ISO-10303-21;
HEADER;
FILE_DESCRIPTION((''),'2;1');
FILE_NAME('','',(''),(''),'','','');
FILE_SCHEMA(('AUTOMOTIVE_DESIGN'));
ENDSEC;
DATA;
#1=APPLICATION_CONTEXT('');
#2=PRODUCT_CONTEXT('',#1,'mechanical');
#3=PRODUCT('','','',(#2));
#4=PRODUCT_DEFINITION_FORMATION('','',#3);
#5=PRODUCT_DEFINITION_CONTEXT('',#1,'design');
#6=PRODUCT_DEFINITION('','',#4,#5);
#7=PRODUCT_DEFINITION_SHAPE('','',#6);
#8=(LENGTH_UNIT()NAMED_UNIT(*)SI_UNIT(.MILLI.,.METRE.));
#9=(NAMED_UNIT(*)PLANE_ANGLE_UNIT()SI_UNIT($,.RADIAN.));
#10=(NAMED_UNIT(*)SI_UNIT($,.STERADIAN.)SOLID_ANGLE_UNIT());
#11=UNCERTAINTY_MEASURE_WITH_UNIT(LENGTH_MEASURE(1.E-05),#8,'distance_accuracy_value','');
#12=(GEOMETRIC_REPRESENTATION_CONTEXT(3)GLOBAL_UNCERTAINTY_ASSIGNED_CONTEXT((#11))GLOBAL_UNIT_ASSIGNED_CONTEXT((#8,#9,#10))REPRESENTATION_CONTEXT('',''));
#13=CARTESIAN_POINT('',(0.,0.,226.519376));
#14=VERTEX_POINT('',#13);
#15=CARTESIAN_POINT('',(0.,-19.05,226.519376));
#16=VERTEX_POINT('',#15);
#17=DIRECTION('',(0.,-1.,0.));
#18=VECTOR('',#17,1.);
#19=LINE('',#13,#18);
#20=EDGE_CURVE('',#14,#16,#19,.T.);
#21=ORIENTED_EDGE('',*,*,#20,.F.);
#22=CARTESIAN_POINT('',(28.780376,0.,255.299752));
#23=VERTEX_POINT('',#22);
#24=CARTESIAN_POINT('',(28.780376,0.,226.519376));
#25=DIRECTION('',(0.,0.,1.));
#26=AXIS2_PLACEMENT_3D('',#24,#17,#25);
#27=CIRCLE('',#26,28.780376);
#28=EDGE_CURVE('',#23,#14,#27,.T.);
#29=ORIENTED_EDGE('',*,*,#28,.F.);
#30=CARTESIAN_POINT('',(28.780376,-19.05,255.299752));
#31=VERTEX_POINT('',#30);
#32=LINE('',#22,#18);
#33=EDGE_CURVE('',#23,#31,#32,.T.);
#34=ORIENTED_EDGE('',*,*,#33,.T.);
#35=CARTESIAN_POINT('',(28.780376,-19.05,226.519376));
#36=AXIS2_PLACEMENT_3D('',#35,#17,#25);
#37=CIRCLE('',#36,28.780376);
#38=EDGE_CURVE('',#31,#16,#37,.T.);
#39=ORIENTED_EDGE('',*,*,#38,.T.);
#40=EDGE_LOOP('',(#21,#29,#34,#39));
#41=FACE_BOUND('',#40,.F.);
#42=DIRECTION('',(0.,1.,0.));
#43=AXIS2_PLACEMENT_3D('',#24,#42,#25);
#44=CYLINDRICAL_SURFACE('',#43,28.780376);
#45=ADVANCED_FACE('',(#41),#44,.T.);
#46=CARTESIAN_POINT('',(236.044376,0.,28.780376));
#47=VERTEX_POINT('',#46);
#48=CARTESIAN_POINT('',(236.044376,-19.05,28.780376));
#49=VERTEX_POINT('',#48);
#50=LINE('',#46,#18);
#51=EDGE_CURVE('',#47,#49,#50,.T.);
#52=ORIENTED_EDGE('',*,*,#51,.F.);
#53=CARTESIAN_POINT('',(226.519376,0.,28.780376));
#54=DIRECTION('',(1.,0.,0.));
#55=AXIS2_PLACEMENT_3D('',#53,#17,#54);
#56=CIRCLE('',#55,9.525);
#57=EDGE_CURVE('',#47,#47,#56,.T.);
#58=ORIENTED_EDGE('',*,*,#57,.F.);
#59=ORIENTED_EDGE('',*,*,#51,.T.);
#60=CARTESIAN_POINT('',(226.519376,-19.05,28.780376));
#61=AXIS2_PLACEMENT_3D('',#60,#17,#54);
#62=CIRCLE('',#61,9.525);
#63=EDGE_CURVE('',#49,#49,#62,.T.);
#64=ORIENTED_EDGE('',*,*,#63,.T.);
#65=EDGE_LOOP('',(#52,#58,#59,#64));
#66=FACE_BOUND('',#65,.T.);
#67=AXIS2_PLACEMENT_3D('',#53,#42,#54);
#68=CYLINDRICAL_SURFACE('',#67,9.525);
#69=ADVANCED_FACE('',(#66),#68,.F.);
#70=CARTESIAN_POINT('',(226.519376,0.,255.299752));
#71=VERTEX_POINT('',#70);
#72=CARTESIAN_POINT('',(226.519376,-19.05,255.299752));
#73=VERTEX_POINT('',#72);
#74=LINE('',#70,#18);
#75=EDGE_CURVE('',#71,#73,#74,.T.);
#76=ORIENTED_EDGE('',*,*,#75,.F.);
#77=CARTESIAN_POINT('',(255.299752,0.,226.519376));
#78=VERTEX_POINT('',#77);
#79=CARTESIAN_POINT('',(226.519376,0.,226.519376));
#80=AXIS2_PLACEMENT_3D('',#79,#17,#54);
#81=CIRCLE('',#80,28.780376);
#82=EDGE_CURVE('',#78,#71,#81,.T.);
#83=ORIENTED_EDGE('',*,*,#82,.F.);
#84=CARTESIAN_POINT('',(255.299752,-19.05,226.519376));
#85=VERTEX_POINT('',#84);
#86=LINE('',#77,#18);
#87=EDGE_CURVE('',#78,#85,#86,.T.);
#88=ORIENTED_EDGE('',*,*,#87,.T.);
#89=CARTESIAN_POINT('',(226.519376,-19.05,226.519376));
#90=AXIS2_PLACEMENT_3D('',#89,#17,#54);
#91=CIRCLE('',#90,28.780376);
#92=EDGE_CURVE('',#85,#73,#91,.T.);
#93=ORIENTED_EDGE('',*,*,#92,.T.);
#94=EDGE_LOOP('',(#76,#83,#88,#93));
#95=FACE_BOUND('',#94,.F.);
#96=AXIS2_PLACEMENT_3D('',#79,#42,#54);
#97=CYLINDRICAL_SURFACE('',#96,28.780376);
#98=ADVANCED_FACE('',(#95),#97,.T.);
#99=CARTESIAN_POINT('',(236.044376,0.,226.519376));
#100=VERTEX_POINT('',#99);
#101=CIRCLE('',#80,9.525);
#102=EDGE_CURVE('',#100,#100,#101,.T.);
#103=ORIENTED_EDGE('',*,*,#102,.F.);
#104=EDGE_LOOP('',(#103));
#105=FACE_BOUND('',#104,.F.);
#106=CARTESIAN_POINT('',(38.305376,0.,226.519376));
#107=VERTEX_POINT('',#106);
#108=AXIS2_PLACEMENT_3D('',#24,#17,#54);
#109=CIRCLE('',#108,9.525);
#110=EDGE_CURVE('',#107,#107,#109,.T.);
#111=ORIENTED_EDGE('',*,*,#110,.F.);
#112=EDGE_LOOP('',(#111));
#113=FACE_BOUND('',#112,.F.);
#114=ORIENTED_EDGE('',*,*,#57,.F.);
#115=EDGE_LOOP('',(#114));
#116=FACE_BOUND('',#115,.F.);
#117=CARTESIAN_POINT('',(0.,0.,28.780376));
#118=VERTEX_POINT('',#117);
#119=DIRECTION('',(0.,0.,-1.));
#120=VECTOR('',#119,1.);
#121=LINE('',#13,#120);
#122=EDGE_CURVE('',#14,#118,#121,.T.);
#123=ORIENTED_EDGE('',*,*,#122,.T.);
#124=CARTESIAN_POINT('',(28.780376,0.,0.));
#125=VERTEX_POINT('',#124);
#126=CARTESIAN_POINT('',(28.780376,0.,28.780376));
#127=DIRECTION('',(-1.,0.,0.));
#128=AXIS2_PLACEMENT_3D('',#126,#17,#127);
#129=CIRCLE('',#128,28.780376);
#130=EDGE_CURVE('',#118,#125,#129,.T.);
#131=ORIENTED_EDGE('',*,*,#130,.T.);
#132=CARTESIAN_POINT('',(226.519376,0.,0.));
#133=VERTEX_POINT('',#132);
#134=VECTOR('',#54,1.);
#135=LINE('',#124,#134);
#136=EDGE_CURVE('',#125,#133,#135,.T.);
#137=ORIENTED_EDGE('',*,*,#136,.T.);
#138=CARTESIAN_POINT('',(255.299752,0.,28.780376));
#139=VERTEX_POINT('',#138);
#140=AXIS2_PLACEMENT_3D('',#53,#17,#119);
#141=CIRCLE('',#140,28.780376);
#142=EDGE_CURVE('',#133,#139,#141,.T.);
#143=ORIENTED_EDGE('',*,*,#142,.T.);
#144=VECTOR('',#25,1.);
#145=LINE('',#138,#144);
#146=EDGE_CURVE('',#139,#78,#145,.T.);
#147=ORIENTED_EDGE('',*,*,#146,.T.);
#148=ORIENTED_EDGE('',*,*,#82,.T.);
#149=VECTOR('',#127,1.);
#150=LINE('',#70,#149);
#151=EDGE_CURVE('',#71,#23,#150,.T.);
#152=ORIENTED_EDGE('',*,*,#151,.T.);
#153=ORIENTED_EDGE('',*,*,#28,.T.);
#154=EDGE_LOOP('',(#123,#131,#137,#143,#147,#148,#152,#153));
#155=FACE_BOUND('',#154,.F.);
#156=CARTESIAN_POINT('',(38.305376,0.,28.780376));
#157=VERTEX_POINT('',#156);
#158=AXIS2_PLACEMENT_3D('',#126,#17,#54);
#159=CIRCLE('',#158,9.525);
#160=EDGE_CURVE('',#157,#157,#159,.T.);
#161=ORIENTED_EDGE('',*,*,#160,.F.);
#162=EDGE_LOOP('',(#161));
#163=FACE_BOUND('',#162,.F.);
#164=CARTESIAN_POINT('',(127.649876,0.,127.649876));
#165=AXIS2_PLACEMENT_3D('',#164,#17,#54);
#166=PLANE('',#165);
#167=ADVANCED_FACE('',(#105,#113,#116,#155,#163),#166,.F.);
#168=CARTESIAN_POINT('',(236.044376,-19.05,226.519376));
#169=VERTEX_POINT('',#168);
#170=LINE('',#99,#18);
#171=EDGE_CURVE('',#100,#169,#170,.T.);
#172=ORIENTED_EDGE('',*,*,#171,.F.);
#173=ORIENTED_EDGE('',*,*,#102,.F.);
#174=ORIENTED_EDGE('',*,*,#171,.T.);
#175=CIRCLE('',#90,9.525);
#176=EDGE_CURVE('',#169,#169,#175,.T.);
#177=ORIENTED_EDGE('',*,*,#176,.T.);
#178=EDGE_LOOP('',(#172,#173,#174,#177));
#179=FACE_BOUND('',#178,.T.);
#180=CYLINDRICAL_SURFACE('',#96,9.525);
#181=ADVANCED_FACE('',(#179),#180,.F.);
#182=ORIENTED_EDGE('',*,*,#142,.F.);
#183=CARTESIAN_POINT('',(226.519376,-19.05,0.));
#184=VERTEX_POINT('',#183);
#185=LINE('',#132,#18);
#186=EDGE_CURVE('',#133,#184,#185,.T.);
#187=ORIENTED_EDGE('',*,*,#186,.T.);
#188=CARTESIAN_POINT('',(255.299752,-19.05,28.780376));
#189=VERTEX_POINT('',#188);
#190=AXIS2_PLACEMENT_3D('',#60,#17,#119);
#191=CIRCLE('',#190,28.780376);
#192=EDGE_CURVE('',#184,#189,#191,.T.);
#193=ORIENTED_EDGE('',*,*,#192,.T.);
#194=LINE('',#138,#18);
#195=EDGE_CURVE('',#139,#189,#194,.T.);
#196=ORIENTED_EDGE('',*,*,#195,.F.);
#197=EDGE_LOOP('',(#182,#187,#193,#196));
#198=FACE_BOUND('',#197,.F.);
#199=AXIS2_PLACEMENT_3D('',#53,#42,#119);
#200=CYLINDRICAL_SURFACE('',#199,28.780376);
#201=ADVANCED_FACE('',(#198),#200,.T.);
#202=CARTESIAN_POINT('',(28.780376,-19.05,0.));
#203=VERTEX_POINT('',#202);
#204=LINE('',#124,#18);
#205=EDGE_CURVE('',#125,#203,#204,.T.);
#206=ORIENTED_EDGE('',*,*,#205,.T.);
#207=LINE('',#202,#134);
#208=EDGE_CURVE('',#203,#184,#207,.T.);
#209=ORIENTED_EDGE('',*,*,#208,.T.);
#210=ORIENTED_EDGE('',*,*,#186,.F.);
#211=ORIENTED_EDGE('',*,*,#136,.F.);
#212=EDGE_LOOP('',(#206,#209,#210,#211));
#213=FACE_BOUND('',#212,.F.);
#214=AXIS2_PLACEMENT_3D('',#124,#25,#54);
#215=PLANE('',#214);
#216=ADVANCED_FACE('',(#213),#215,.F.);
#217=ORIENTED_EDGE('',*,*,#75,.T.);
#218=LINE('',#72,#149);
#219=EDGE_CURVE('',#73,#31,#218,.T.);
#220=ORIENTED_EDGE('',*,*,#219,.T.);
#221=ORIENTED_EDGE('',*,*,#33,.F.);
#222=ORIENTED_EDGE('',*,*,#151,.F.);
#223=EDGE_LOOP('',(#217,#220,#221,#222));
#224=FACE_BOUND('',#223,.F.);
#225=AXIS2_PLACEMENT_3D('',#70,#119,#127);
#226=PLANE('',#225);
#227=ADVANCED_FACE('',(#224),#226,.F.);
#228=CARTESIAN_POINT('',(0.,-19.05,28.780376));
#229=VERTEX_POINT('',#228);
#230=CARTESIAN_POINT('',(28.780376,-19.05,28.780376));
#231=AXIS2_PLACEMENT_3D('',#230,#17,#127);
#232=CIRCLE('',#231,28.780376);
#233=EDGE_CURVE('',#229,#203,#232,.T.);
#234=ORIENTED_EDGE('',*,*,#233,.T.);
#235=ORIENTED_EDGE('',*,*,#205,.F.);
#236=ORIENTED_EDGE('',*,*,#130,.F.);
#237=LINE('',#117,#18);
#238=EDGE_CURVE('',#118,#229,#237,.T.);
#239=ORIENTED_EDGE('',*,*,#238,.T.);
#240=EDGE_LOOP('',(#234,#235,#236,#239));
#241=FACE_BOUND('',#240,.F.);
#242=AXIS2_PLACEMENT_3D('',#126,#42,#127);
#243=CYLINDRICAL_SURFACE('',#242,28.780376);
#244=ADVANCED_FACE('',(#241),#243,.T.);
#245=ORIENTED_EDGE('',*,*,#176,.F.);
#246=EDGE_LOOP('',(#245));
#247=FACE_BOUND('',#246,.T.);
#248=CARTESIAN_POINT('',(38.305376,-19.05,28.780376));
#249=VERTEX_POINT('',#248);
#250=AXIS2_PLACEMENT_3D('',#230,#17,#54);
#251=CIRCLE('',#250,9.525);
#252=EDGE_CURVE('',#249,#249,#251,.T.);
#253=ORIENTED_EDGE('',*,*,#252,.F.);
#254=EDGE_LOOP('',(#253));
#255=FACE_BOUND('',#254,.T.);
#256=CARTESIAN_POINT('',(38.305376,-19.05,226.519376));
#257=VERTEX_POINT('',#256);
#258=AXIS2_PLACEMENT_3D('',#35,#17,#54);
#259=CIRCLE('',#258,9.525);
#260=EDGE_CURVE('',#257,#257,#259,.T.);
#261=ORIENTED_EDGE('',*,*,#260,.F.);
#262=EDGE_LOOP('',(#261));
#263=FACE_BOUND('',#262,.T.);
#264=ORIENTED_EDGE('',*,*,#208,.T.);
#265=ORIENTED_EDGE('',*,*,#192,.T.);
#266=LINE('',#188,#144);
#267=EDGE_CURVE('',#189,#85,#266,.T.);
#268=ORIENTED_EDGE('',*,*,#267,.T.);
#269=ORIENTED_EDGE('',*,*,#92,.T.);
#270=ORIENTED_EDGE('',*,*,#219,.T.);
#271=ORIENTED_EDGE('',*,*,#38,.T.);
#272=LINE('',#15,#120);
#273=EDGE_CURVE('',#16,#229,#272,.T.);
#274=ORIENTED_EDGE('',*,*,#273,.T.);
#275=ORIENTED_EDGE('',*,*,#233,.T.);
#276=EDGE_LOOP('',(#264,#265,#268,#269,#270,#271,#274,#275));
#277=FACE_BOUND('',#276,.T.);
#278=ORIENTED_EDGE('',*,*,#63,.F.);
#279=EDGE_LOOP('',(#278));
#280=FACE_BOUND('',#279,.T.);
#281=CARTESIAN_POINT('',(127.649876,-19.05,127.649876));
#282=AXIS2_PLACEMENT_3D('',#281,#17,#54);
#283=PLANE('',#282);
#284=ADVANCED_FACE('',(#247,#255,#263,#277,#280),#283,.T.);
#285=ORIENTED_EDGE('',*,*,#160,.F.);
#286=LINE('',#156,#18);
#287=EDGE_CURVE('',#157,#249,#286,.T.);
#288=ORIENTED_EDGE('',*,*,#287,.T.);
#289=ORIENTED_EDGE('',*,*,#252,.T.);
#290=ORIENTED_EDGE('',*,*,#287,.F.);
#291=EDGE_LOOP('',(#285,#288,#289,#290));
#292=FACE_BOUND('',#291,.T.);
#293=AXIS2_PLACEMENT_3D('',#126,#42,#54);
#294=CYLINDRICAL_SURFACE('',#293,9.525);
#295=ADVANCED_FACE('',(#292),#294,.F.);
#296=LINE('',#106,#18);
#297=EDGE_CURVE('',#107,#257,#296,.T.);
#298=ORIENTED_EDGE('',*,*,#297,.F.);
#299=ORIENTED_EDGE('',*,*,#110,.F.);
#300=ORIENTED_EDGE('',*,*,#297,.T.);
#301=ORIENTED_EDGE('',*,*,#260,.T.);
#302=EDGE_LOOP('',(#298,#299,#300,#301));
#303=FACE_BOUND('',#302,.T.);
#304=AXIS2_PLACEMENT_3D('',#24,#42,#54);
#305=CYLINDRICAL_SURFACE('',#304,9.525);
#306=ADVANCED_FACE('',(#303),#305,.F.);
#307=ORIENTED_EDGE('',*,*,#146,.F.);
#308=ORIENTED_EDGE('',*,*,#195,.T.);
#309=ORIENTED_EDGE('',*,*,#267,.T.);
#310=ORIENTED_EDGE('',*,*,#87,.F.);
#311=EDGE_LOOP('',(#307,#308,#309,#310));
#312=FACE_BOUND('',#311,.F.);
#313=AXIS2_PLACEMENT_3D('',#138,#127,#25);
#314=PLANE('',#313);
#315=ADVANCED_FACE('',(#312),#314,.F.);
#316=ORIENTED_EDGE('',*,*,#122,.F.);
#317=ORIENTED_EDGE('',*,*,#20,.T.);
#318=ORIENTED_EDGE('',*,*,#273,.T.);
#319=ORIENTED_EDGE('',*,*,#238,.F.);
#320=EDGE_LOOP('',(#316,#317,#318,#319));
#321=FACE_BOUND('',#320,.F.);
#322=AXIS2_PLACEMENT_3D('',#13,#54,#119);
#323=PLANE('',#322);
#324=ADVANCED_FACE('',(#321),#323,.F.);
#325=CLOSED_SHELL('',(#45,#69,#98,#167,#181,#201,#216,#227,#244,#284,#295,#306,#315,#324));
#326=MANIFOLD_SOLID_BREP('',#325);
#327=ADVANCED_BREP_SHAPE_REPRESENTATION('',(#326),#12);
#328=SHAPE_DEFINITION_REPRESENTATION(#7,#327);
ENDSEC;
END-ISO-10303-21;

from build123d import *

# Parameters (mm, degrees)
F0_R     = 9.525
F1_DEPTH = 19.05


# Not quite as in the source:
# - a feature names something its author has since deleted; it is built from what else it names


with BuildPart() as f1:
    # F0 (on Front) → F1 (new body)
    with BuildSketch(Plane.XZ):
        with BuildLine():
            ThreePointArc((0, 28.7803760395), (8.4295769769, 8.4295769769), (28.7803760395, 0))
            Line((28.7803760395, 0), (226.5193760395, 0))
            ThreePointArc((226.5193760395, 0), (246.8701751021, 8.4295769769), (255.299752079, 28.7803760395))
            Line((255.299752079, 28.7803760395), (255.299752079, 226.5193760395))
            ThreePointArc((255.299752079, 226.5193760395), (246.8701751021, 246.8701751021), (226.5193760395, 255.299752079))
            Line((226.5193760395, 255.299752079), (28.7803760395, 255.299752079))
            ThreePointArc((28.7803760395, 255.299752079), (8.4295769769, 246.8701751021), (0, 226.5193760395))
            Line((0, 226.5193760395), (0, 28.7803760395))
        make_face()
        with Locations((28.7803760395, 28.7803760395)):
            Circle(F0_R, mode=Mode.SUBTRACT)
        with Locations((226.5193760395, 28.7803760395)):
            Circle(F0_R, mode=Mode.SUBTRACT)
        with Locations((28.7803760395, 226.5193760395)):
            Circle(F0_R, mode=Mode.SUBTRACT)
        with Locations((226.5193760395, 226.5193760395)):
            Circle(F0_R, mode=Mode.SUBTRACT)
    extrude(amount=F1_DEPTH)


solid = f1.part
